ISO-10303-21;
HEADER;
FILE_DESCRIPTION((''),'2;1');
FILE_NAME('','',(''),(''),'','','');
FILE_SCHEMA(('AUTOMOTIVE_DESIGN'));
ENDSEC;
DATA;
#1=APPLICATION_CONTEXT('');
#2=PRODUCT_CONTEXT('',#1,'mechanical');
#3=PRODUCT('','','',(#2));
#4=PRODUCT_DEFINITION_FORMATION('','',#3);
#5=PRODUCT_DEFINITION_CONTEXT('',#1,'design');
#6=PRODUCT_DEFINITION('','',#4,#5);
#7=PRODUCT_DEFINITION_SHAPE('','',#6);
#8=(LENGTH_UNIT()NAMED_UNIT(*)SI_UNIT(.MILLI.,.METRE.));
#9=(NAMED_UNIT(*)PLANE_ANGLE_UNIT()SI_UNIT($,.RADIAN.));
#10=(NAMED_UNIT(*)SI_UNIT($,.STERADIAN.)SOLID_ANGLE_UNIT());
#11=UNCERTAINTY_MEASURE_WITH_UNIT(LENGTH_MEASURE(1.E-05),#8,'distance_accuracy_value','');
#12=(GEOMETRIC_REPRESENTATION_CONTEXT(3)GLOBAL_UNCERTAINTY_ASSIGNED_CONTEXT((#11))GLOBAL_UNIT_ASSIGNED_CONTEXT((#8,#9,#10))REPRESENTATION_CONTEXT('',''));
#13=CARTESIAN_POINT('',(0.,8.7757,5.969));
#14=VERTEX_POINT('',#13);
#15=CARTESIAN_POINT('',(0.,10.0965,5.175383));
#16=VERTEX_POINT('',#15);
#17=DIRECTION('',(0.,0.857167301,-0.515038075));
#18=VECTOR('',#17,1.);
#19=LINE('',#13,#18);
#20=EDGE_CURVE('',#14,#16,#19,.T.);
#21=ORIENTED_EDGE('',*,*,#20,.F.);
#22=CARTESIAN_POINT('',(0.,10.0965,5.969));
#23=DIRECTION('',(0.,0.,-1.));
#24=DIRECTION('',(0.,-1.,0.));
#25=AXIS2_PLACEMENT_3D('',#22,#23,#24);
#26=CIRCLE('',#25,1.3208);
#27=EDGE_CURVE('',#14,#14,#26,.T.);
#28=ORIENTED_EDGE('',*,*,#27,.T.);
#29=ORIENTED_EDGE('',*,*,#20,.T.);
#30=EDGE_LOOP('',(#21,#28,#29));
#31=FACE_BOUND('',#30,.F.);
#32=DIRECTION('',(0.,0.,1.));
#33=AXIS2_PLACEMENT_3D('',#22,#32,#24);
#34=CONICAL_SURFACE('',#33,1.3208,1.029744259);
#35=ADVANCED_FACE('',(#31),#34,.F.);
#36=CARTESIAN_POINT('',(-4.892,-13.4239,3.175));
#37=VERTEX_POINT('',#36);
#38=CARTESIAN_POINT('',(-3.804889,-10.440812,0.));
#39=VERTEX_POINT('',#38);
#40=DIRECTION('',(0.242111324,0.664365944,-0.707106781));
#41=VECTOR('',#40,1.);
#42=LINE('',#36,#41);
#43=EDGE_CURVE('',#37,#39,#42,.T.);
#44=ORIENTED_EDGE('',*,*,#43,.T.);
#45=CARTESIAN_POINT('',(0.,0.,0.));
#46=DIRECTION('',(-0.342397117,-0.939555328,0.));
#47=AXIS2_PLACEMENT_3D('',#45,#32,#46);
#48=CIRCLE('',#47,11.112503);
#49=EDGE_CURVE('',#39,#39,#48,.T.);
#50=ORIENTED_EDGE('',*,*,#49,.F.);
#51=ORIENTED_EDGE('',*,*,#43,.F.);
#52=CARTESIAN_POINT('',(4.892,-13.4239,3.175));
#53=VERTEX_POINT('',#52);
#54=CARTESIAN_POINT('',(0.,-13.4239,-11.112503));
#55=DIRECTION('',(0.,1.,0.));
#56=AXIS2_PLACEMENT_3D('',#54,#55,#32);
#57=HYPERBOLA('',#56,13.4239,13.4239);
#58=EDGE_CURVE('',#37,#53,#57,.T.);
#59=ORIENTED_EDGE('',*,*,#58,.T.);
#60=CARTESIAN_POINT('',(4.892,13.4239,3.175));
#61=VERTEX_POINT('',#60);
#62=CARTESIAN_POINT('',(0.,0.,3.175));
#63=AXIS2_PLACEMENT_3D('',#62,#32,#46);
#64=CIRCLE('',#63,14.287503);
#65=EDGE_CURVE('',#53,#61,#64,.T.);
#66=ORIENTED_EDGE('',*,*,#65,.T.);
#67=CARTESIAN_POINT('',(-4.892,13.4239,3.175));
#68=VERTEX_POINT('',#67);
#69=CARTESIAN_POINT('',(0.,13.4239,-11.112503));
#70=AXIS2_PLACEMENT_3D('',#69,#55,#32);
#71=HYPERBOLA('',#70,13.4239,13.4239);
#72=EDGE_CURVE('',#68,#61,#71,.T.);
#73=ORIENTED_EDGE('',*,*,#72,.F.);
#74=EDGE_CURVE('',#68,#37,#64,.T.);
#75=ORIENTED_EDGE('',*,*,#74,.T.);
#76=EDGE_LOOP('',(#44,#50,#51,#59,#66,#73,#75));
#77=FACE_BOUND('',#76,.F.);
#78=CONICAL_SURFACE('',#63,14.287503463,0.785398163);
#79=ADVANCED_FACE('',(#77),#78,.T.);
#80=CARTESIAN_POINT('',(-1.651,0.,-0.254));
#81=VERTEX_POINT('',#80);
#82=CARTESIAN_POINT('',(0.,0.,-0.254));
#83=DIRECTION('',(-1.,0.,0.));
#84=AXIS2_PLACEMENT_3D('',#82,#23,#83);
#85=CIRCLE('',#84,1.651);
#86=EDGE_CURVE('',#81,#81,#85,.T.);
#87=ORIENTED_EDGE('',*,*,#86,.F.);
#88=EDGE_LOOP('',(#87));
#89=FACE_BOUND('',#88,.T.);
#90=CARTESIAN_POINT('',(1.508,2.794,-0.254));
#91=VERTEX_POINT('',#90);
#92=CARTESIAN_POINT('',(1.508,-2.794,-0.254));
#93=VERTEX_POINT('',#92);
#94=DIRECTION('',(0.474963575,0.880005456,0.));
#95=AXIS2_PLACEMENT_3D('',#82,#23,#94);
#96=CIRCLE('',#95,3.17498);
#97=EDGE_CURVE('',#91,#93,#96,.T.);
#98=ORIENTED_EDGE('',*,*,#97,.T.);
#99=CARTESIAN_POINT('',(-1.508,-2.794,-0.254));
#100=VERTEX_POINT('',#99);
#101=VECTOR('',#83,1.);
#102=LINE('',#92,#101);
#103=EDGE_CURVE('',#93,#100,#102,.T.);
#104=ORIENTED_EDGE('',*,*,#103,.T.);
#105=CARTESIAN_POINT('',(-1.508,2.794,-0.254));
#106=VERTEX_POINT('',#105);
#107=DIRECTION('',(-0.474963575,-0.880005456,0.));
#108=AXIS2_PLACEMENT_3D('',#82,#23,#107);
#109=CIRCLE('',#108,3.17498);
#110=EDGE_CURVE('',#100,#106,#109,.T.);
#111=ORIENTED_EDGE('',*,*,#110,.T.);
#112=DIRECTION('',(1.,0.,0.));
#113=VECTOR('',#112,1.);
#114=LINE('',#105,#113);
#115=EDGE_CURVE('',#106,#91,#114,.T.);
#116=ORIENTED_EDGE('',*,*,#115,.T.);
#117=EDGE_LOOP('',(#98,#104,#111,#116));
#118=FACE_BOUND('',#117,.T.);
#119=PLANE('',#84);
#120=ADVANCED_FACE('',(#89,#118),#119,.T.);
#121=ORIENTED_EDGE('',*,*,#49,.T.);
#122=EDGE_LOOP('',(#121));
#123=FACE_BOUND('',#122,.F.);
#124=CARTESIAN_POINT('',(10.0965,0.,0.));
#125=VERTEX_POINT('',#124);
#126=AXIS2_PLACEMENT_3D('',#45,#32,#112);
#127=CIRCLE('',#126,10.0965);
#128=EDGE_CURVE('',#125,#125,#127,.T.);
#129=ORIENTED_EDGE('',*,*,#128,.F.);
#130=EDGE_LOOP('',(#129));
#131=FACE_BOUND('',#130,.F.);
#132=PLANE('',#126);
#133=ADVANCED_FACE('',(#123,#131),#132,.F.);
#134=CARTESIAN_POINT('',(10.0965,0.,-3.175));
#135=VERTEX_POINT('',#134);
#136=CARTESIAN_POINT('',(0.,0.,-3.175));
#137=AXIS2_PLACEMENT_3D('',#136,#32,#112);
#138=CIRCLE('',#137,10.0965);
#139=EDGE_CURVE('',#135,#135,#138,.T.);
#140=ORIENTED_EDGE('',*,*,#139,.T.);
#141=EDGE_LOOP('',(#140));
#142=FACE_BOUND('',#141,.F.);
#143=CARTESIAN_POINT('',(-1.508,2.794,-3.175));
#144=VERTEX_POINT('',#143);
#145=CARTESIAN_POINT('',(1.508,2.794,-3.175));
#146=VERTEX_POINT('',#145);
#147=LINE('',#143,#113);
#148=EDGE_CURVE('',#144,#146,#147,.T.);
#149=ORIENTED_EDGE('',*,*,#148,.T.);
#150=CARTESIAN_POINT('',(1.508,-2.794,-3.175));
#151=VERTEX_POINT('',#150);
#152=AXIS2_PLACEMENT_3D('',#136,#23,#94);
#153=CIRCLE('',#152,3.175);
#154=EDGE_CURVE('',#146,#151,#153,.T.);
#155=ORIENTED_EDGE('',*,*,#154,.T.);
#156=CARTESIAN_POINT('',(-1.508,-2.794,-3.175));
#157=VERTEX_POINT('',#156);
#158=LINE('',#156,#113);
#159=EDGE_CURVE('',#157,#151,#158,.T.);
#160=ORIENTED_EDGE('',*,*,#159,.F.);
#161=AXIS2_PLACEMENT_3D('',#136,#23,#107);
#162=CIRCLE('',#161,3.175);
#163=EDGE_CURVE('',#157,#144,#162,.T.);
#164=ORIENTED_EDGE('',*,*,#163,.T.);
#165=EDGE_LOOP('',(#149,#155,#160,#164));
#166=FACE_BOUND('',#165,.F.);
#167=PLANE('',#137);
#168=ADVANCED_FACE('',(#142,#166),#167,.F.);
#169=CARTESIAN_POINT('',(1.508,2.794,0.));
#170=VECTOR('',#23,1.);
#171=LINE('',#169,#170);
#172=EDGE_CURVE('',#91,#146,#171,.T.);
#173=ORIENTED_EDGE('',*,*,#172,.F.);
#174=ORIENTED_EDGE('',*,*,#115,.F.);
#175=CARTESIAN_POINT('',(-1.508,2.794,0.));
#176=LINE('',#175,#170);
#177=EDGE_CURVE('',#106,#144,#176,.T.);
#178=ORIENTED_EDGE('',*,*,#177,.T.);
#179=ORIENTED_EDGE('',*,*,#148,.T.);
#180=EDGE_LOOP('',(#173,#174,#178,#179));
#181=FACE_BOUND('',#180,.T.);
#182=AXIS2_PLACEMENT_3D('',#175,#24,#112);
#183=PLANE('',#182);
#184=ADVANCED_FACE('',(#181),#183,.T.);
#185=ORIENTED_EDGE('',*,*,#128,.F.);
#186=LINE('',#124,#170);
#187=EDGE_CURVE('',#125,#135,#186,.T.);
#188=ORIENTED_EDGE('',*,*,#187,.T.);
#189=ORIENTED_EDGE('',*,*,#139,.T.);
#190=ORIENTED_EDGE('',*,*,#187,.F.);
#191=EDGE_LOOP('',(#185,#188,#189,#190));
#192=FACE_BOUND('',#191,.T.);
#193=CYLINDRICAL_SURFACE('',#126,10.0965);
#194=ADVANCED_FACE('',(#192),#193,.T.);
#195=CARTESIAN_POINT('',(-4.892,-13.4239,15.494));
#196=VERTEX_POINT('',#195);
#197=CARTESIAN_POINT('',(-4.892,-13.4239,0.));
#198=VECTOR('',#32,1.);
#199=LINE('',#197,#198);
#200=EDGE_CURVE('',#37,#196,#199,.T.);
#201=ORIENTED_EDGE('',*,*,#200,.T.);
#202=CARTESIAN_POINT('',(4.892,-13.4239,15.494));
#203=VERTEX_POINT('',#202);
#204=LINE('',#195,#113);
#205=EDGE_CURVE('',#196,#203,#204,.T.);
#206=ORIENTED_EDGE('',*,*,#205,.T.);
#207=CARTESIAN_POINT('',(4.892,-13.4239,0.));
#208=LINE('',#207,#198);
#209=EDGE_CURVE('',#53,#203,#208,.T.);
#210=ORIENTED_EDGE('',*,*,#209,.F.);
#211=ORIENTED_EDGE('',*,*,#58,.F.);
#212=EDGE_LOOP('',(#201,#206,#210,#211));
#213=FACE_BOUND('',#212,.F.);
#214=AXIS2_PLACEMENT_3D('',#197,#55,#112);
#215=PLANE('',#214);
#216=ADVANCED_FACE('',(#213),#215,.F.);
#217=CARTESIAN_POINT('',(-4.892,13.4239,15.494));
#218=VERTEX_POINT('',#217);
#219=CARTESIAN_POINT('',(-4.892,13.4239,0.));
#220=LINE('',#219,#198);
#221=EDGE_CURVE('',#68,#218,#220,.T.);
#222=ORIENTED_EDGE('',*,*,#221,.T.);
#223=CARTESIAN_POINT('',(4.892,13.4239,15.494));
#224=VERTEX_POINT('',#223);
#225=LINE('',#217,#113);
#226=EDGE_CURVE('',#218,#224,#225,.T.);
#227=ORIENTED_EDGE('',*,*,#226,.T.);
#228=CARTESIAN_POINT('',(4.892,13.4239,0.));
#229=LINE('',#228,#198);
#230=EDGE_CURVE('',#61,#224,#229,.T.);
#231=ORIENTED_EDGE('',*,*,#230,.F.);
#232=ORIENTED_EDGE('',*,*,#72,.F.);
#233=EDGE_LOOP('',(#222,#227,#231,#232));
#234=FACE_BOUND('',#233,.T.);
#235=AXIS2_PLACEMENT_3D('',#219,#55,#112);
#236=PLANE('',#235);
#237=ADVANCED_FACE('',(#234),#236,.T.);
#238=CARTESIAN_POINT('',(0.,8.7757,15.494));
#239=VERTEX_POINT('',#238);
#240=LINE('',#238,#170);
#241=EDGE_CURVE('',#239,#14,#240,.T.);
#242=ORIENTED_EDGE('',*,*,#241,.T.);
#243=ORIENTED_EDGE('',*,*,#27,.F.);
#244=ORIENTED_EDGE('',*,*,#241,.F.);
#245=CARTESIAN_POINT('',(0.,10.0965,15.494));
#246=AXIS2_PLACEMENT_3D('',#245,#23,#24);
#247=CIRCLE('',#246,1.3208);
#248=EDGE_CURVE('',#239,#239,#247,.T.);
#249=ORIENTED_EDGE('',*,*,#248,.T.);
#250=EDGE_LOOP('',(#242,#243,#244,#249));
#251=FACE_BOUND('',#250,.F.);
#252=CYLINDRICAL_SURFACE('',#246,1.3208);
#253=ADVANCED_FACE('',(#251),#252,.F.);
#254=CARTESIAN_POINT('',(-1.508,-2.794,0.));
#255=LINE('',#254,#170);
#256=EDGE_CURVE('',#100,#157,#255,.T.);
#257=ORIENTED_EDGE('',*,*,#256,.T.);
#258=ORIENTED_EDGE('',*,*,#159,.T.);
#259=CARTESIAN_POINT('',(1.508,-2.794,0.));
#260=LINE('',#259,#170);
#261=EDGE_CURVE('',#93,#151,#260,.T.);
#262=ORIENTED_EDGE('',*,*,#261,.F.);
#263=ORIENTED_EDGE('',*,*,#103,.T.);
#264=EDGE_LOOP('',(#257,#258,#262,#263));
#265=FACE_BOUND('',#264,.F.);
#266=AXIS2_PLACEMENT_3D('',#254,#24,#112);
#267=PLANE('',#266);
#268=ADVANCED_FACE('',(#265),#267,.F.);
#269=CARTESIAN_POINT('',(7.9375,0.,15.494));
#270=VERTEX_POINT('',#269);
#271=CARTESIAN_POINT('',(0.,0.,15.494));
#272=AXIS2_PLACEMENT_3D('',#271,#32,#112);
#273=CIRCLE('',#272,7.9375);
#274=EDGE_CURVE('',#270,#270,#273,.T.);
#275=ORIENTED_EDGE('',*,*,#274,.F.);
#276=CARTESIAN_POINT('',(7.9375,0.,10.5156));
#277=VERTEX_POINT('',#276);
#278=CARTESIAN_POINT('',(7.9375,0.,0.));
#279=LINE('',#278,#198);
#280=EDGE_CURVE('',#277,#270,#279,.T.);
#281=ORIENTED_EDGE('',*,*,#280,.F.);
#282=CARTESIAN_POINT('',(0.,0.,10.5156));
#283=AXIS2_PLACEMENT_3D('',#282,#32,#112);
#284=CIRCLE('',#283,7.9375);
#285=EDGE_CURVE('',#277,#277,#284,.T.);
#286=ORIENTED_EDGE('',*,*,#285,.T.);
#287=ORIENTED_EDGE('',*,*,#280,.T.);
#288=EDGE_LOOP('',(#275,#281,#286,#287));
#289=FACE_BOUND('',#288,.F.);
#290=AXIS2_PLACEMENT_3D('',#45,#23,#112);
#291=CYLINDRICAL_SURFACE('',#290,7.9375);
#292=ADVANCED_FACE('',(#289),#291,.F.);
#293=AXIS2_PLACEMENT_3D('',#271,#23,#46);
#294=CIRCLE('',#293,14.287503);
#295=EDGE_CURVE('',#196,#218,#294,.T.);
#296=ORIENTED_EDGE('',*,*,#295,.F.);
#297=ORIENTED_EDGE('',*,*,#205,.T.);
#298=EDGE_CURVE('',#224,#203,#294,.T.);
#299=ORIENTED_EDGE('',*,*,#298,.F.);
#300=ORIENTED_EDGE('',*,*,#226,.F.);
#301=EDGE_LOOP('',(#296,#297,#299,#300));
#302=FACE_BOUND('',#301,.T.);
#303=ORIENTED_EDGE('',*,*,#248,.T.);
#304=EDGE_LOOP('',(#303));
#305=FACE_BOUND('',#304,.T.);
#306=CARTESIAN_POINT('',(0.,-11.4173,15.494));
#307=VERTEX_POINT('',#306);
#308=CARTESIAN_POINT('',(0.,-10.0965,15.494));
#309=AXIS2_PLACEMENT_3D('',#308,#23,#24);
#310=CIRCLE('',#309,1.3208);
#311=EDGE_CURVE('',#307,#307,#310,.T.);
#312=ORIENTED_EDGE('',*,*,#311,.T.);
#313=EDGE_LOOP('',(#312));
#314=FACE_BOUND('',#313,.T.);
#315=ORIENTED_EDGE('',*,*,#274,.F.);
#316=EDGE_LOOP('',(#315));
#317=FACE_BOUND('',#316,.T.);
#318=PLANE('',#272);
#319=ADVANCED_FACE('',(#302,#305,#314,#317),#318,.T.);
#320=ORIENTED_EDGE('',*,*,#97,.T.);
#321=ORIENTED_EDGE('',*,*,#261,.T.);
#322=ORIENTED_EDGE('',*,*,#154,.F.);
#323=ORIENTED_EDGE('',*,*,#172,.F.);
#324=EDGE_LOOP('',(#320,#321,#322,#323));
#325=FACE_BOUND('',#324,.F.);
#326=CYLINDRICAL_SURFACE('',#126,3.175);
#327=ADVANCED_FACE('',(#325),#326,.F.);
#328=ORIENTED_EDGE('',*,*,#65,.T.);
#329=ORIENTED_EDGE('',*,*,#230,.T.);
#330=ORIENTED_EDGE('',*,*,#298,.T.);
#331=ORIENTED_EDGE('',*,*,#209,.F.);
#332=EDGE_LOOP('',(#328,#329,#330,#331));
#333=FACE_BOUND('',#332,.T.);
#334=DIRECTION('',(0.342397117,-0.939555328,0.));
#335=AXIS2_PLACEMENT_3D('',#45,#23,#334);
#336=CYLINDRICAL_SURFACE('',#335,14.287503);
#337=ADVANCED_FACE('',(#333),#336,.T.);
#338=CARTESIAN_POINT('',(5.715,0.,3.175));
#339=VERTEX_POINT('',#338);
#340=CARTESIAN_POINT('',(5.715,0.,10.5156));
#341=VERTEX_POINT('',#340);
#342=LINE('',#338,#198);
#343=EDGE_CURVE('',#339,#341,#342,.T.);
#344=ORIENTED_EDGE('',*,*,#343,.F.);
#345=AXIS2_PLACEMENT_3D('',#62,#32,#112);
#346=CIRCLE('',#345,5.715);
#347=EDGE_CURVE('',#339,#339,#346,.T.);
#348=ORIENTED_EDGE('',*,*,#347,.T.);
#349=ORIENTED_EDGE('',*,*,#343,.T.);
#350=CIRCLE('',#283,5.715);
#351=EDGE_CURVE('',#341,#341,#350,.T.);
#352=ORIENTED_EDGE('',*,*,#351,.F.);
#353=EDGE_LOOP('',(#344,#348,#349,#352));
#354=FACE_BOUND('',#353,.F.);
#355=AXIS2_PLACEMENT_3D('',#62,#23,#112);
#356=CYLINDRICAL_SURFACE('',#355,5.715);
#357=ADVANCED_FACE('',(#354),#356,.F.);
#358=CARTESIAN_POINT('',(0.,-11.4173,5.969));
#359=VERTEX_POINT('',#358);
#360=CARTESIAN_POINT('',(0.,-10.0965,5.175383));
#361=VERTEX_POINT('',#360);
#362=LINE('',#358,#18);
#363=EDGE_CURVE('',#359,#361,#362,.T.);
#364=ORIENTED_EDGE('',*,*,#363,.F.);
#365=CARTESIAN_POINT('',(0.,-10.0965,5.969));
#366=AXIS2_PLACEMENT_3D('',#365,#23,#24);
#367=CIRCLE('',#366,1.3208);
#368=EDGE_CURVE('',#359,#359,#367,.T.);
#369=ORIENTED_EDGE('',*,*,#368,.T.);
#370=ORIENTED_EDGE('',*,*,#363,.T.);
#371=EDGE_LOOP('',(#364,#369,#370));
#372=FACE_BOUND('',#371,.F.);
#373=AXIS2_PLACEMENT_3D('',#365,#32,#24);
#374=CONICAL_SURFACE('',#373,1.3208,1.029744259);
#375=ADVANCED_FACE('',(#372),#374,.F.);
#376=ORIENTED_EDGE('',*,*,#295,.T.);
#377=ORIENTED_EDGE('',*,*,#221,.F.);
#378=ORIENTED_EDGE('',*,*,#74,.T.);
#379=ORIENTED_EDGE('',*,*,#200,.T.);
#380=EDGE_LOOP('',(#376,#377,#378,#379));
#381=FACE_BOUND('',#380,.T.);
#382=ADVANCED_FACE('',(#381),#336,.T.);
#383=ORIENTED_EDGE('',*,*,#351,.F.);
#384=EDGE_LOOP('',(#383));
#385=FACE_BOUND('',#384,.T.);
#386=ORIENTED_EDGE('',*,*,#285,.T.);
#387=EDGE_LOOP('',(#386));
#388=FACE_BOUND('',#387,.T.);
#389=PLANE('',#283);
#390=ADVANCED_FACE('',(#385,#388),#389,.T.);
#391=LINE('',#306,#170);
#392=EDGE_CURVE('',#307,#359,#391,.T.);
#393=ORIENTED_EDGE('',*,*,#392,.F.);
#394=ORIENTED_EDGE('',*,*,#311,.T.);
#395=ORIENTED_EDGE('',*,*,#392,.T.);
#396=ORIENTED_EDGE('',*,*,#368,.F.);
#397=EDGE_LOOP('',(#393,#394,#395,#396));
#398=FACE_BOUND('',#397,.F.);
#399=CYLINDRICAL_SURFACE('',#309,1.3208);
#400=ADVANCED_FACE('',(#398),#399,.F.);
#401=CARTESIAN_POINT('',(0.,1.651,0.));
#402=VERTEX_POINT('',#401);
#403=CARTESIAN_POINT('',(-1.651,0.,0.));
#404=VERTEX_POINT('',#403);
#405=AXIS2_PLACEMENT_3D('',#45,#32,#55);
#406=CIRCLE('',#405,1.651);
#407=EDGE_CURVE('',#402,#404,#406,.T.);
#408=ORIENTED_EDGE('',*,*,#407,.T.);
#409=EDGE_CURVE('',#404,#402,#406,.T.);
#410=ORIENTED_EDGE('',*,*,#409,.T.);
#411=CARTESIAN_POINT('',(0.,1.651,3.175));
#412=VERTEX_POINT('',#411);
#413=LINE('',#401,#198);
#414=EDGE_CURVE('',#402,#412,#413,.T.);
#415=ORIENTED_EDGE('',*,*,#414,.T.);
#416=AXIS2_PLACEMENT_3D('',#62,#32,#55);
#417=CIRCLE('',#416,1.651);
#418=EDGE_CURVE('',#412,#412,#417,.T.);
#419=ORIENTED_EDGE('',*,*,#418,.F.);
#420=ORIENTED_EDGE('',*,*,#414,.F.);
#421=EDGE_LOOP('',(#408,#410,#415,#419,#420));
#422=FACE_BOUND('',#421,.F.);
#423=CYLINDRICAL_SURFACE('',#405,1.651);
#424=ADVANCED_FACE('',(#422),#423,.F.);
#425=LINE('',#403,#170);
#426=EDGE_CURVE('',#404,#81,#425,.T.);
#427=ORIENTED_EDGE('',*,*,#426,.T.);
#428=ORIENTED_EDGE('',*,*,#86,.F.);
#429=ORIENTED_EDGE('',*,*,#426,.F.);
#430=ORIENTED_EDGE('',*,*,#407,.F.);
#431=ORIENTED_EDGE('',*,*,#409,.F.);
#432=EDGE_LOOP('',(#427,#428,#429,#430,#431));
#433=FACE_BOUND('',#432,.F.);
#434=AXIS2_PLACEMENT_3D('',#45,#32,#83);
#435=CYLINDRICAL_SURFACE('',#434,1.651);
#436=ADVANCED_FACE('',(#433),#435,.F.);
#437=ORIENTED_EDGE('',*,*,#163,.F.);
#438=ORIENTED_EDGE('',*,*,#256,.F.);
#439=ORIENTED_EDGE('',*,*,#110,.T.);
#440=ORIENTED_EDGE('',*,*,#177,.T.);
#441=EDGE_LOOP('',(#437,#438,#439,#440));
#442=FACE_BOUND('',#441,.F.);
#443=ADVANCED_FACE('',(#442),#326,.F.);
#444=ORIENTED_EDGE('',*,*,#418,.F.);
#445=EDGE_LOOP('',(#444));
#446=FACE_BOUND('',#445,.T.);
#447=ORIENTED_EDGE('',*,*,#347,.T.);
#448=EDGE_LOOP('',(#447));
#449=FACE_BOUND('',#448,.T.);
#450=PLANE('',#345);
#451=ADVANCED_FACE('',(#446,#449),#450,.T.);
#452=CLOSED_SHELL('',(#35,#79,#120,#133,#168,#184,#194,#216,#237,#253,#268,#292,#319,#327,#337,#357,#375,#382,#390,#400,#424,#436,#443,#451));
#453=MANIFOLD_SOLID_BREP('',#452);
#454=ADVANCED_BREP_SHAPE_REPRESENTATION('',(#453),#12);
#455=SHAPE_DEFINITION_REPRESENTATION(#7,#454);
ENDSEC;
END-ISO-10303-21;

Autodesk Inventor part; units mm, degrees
ref_plane "YZ Plane" through (0, 0, 0) normal (1, 0, 0) x (0, 1, 0)
ref_plane "XZ Plane" through (0, 0, 0) normal (0, 1, 0) x (-1, 0, 0)
ref_plane "XY Plane" through (0, 0, 0) normal (0, 0, 1) x (1, 0, 0)
sketch "Sketch1" plane through (0, 0, 0) normal (0, 0, 1) x (1, 0, 0)
  circle A0 centre (0, 0) radius 3.175
  line L0 (-1.508, 2.794) -> (1.508, 2.794)
  line L1 (-3.175, 0) -> (0, 0)
  line L2 (0, 0) -> (3.175, 0)
  line L3 (-1.508, -2.794) -> (1.508, -2.794)
  circle A1 centre (0, 0) radius 7.9375
  arc A2 (-4.892, 13.4239) -> (-4.892, -13.4239) centre (0, 0) ccw
  circle A3 centre (0, 10.0965) radius 1.905 construction
  circle A4 centre (0, 10.0965) radius 3.3274 construction
  circle A5 centre (0, 0) radius 10.0965
  line L4 (0, 0) -> (0, 10.0965) construction
  line L5 (0, -10.0965) -> (0, 0) construction
  line L6 (-4.892, 13.4239) -> (4.892, 13.4239)
  arc A6 (4.892, 13.4239) -> (-4.892, 13.4239) centre (0, 0) ccw
  circle A7 centre (0, -10.0965) radius 3.3274 construction
  line L7 (-4.892, -13.4239) -> (4.892, -13.4239)
  arc A8 (4.892, -13.4239) -> (4.892, 13.4239) centre (0, 0) ccw
  arc A9 (-4.892, -13.4239) -> (4.892, -13.4239) centre (0, 0) ccw
  dimension "d0" = 6.35
  dimension "d1" = 5.588
  dimension "d2" = 15.875
  dimension "d4" = 3.81
  dimension "d5" = 6.6548
  dimension "d7" = 2.159
  dimension "d8" = 14.2875
extrude "Extrusion1" add sketch "Sketch1" along normal blind 15.494 contours L6 A8 L7 A2 | A6 L6 | L7 A9 | A5
extrude "Extrusion2" add sketch "Sketch1" against normal blind 3.175 contours L0 A0 | A0 L3 | A1 | A5
extrude "Extrusion3" add sketch "Sketch1" along normal blind 3.175 contours L2 L1 A0 L0 | A0 L3 L1 L2 | L0 A0 | A0 L3 | A1
hole "Hole1" at (0, 0, 0) direction (0, 0, 1) diameter 3.302 end through all thread size "8-32 UNC" class "2B" standard "ANSI Unified Screw Threads"
sketch "Sketch2" plane through (0, 0, 3.175) normal (0, 0, 1) x (1, 0, 0)
  circle A0 centre (0, 0) radius 7.9375 projected
  circle A1 centre (0, 0) radius 3.429 construction
  circle A2 centre (0, 0) radius 5.715
  dimension "d22" = 6.858
  dimension "d23" = 11.43
extrude "Extrusion4" add sketch "Sketch2" along normal blind 7.3406
sketch "Sketch3" plane through (0, 0, 15.494) normal (0, 0, 1) x (1, 0, 0)
  point P0 (0, -10.0965)
  point P1 (0, 10.0965)
hole "Hole2" at (0, 10.0965, 15.494) at (0, -10.0965, 15.494) direction (0, 0, -1) diameter 2.6416 depth 9.525 tip angle 118 thread size "6-32 UNC" class "2B" standard "ANSI Unified Screw Threads"
chamfer "Chamfer2" distance 3.175 angle 45 1 edges at (-4.892, 13.4239, 0)
extrude "Extrusion5" cut sketch "Sketch1" along normal up to surface (15.494 mm away) contours A6 L6 | L7 A9
sketch "Sketch4" plane through (0, 0, 0) normal (0, 0, -1) x (-1, 0, 0)
  circle A0 centre (0, 0) radius 1.651 projected
  line L0 (1.508, 2.794) -> (-1.508, 2.794) projected
  arc A1 (-1.508, 2.794) -> (-1.508, -2.794) centre (0, 0) ccw projected
  line L1 (-1.508, -2.794) -> (1.508, -2.794) projected
  arc A2 (1.508, -2.794) -> (1.508, 2.794) centre (0, 0) ccw projected
extrude "Extrusion6" add sketch "Sketch4" along normal blind 0.254
properties part number "Pnuematic Connector"
